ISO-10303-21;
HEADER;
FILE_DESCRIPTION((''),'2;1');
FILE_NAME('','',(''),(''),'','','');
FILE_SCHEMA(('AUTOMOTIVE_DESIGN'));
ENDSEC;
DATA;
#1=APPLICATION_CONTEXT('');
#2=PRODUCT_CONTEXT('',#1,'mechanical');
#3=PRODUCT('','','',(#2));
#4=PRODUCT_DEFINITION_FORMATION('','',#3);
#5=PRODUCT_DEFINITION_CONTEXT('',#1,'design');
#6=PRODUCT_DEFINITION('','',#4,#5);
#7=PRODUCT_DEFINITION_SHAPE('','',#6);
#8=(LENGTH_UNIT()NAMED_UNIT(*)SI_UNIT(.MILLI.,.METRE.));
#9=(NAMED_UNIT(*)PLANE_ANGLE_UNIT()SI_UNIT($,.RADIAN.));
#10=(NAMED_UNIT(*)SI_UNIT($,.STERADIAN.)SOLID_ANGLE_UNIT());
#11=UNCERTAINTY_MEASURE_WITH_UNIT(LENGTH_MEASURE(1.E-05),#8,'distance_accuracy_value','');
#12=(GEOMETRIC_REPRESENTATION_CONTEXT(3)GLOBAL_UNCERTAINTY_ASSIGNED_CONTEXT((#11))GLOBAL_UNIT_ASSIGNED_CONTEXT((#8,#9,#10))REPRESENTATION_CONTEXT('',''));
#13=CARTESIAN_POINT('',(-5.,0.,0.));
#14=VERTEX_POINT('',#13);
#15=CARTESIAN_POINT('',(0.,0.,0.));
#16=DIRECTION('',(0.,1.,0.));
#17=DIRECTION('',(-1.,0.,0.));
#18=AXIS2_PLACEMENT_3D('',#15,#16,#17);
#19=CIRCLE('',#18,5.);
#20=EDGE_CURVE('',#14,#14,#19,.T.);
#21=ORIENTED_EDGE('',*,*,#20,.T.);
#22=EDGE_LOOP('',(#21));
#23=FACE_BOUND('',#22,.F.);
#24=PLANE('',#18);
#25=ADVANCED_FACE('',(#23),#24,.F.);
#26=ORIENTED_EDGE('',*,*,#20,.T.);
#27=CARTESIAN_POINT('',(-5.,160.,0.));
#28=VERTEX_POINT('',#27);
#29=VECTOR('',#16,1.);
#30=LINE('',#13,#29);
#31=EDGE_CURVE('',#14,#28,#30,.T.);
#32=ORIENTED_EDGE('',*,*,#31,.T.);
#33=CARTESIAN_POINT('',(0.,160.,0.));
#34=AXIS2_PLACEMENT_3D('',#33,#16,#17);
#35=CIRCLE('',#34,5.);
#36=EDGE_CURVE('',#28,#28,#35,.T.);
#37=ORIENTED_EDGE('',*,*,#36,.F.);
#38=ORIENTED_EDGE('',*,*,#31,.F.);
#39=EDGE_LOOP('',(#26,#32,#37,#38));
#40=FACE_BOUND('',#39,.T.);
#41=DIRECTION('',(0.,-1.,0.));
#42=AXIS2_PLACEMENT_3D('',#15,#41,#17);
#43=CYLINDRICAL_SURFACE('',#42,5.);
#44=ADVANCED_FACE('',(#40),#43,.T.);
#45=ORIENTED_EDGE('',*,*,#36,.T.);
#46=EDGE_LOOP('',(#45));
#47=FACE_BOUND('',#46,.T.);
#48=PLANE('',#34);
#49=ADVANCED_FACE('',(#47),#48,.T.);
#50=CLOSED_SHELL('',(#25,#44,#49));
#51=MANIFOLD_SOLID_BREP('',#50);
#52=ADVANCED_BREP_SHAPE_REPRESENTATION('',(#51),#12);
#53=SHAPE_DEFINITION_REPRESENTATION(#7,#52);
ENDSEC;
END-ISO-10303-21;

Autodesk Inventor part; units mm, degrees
ref_plane "YZ Plane" through (0, 0, 0) normal (1, 0, 0) x (0, 1, 0)
ref_plane "XZ Plane" through (0, 0, 0) normal (0, 1, 0) x (-1, 0, 0)
ref_plane "XY Plane" through (0, 0, 0) normal (0, 0, 1) x (1, 0, 0)
sketch "Skizze1" plane through (0, 0, 0) normal (0, 1, 0) x (-1, 0, 0)
  circle A0 centre (0, 0) radius 5
  dimension "d0" = 10
extrude "Extrusion1" add sketch "Skizze1" along normal blind 160
thread "Gewinde1" size "M10x1.5" class "6g" standard "ANSI Metric M Profile" length 10
thread "Gewinde2" size "M10x1.5" class "6g" standard "ANSI Metric M Profile" length 10
properties part number "verbinder2" material "Edelstahl"
